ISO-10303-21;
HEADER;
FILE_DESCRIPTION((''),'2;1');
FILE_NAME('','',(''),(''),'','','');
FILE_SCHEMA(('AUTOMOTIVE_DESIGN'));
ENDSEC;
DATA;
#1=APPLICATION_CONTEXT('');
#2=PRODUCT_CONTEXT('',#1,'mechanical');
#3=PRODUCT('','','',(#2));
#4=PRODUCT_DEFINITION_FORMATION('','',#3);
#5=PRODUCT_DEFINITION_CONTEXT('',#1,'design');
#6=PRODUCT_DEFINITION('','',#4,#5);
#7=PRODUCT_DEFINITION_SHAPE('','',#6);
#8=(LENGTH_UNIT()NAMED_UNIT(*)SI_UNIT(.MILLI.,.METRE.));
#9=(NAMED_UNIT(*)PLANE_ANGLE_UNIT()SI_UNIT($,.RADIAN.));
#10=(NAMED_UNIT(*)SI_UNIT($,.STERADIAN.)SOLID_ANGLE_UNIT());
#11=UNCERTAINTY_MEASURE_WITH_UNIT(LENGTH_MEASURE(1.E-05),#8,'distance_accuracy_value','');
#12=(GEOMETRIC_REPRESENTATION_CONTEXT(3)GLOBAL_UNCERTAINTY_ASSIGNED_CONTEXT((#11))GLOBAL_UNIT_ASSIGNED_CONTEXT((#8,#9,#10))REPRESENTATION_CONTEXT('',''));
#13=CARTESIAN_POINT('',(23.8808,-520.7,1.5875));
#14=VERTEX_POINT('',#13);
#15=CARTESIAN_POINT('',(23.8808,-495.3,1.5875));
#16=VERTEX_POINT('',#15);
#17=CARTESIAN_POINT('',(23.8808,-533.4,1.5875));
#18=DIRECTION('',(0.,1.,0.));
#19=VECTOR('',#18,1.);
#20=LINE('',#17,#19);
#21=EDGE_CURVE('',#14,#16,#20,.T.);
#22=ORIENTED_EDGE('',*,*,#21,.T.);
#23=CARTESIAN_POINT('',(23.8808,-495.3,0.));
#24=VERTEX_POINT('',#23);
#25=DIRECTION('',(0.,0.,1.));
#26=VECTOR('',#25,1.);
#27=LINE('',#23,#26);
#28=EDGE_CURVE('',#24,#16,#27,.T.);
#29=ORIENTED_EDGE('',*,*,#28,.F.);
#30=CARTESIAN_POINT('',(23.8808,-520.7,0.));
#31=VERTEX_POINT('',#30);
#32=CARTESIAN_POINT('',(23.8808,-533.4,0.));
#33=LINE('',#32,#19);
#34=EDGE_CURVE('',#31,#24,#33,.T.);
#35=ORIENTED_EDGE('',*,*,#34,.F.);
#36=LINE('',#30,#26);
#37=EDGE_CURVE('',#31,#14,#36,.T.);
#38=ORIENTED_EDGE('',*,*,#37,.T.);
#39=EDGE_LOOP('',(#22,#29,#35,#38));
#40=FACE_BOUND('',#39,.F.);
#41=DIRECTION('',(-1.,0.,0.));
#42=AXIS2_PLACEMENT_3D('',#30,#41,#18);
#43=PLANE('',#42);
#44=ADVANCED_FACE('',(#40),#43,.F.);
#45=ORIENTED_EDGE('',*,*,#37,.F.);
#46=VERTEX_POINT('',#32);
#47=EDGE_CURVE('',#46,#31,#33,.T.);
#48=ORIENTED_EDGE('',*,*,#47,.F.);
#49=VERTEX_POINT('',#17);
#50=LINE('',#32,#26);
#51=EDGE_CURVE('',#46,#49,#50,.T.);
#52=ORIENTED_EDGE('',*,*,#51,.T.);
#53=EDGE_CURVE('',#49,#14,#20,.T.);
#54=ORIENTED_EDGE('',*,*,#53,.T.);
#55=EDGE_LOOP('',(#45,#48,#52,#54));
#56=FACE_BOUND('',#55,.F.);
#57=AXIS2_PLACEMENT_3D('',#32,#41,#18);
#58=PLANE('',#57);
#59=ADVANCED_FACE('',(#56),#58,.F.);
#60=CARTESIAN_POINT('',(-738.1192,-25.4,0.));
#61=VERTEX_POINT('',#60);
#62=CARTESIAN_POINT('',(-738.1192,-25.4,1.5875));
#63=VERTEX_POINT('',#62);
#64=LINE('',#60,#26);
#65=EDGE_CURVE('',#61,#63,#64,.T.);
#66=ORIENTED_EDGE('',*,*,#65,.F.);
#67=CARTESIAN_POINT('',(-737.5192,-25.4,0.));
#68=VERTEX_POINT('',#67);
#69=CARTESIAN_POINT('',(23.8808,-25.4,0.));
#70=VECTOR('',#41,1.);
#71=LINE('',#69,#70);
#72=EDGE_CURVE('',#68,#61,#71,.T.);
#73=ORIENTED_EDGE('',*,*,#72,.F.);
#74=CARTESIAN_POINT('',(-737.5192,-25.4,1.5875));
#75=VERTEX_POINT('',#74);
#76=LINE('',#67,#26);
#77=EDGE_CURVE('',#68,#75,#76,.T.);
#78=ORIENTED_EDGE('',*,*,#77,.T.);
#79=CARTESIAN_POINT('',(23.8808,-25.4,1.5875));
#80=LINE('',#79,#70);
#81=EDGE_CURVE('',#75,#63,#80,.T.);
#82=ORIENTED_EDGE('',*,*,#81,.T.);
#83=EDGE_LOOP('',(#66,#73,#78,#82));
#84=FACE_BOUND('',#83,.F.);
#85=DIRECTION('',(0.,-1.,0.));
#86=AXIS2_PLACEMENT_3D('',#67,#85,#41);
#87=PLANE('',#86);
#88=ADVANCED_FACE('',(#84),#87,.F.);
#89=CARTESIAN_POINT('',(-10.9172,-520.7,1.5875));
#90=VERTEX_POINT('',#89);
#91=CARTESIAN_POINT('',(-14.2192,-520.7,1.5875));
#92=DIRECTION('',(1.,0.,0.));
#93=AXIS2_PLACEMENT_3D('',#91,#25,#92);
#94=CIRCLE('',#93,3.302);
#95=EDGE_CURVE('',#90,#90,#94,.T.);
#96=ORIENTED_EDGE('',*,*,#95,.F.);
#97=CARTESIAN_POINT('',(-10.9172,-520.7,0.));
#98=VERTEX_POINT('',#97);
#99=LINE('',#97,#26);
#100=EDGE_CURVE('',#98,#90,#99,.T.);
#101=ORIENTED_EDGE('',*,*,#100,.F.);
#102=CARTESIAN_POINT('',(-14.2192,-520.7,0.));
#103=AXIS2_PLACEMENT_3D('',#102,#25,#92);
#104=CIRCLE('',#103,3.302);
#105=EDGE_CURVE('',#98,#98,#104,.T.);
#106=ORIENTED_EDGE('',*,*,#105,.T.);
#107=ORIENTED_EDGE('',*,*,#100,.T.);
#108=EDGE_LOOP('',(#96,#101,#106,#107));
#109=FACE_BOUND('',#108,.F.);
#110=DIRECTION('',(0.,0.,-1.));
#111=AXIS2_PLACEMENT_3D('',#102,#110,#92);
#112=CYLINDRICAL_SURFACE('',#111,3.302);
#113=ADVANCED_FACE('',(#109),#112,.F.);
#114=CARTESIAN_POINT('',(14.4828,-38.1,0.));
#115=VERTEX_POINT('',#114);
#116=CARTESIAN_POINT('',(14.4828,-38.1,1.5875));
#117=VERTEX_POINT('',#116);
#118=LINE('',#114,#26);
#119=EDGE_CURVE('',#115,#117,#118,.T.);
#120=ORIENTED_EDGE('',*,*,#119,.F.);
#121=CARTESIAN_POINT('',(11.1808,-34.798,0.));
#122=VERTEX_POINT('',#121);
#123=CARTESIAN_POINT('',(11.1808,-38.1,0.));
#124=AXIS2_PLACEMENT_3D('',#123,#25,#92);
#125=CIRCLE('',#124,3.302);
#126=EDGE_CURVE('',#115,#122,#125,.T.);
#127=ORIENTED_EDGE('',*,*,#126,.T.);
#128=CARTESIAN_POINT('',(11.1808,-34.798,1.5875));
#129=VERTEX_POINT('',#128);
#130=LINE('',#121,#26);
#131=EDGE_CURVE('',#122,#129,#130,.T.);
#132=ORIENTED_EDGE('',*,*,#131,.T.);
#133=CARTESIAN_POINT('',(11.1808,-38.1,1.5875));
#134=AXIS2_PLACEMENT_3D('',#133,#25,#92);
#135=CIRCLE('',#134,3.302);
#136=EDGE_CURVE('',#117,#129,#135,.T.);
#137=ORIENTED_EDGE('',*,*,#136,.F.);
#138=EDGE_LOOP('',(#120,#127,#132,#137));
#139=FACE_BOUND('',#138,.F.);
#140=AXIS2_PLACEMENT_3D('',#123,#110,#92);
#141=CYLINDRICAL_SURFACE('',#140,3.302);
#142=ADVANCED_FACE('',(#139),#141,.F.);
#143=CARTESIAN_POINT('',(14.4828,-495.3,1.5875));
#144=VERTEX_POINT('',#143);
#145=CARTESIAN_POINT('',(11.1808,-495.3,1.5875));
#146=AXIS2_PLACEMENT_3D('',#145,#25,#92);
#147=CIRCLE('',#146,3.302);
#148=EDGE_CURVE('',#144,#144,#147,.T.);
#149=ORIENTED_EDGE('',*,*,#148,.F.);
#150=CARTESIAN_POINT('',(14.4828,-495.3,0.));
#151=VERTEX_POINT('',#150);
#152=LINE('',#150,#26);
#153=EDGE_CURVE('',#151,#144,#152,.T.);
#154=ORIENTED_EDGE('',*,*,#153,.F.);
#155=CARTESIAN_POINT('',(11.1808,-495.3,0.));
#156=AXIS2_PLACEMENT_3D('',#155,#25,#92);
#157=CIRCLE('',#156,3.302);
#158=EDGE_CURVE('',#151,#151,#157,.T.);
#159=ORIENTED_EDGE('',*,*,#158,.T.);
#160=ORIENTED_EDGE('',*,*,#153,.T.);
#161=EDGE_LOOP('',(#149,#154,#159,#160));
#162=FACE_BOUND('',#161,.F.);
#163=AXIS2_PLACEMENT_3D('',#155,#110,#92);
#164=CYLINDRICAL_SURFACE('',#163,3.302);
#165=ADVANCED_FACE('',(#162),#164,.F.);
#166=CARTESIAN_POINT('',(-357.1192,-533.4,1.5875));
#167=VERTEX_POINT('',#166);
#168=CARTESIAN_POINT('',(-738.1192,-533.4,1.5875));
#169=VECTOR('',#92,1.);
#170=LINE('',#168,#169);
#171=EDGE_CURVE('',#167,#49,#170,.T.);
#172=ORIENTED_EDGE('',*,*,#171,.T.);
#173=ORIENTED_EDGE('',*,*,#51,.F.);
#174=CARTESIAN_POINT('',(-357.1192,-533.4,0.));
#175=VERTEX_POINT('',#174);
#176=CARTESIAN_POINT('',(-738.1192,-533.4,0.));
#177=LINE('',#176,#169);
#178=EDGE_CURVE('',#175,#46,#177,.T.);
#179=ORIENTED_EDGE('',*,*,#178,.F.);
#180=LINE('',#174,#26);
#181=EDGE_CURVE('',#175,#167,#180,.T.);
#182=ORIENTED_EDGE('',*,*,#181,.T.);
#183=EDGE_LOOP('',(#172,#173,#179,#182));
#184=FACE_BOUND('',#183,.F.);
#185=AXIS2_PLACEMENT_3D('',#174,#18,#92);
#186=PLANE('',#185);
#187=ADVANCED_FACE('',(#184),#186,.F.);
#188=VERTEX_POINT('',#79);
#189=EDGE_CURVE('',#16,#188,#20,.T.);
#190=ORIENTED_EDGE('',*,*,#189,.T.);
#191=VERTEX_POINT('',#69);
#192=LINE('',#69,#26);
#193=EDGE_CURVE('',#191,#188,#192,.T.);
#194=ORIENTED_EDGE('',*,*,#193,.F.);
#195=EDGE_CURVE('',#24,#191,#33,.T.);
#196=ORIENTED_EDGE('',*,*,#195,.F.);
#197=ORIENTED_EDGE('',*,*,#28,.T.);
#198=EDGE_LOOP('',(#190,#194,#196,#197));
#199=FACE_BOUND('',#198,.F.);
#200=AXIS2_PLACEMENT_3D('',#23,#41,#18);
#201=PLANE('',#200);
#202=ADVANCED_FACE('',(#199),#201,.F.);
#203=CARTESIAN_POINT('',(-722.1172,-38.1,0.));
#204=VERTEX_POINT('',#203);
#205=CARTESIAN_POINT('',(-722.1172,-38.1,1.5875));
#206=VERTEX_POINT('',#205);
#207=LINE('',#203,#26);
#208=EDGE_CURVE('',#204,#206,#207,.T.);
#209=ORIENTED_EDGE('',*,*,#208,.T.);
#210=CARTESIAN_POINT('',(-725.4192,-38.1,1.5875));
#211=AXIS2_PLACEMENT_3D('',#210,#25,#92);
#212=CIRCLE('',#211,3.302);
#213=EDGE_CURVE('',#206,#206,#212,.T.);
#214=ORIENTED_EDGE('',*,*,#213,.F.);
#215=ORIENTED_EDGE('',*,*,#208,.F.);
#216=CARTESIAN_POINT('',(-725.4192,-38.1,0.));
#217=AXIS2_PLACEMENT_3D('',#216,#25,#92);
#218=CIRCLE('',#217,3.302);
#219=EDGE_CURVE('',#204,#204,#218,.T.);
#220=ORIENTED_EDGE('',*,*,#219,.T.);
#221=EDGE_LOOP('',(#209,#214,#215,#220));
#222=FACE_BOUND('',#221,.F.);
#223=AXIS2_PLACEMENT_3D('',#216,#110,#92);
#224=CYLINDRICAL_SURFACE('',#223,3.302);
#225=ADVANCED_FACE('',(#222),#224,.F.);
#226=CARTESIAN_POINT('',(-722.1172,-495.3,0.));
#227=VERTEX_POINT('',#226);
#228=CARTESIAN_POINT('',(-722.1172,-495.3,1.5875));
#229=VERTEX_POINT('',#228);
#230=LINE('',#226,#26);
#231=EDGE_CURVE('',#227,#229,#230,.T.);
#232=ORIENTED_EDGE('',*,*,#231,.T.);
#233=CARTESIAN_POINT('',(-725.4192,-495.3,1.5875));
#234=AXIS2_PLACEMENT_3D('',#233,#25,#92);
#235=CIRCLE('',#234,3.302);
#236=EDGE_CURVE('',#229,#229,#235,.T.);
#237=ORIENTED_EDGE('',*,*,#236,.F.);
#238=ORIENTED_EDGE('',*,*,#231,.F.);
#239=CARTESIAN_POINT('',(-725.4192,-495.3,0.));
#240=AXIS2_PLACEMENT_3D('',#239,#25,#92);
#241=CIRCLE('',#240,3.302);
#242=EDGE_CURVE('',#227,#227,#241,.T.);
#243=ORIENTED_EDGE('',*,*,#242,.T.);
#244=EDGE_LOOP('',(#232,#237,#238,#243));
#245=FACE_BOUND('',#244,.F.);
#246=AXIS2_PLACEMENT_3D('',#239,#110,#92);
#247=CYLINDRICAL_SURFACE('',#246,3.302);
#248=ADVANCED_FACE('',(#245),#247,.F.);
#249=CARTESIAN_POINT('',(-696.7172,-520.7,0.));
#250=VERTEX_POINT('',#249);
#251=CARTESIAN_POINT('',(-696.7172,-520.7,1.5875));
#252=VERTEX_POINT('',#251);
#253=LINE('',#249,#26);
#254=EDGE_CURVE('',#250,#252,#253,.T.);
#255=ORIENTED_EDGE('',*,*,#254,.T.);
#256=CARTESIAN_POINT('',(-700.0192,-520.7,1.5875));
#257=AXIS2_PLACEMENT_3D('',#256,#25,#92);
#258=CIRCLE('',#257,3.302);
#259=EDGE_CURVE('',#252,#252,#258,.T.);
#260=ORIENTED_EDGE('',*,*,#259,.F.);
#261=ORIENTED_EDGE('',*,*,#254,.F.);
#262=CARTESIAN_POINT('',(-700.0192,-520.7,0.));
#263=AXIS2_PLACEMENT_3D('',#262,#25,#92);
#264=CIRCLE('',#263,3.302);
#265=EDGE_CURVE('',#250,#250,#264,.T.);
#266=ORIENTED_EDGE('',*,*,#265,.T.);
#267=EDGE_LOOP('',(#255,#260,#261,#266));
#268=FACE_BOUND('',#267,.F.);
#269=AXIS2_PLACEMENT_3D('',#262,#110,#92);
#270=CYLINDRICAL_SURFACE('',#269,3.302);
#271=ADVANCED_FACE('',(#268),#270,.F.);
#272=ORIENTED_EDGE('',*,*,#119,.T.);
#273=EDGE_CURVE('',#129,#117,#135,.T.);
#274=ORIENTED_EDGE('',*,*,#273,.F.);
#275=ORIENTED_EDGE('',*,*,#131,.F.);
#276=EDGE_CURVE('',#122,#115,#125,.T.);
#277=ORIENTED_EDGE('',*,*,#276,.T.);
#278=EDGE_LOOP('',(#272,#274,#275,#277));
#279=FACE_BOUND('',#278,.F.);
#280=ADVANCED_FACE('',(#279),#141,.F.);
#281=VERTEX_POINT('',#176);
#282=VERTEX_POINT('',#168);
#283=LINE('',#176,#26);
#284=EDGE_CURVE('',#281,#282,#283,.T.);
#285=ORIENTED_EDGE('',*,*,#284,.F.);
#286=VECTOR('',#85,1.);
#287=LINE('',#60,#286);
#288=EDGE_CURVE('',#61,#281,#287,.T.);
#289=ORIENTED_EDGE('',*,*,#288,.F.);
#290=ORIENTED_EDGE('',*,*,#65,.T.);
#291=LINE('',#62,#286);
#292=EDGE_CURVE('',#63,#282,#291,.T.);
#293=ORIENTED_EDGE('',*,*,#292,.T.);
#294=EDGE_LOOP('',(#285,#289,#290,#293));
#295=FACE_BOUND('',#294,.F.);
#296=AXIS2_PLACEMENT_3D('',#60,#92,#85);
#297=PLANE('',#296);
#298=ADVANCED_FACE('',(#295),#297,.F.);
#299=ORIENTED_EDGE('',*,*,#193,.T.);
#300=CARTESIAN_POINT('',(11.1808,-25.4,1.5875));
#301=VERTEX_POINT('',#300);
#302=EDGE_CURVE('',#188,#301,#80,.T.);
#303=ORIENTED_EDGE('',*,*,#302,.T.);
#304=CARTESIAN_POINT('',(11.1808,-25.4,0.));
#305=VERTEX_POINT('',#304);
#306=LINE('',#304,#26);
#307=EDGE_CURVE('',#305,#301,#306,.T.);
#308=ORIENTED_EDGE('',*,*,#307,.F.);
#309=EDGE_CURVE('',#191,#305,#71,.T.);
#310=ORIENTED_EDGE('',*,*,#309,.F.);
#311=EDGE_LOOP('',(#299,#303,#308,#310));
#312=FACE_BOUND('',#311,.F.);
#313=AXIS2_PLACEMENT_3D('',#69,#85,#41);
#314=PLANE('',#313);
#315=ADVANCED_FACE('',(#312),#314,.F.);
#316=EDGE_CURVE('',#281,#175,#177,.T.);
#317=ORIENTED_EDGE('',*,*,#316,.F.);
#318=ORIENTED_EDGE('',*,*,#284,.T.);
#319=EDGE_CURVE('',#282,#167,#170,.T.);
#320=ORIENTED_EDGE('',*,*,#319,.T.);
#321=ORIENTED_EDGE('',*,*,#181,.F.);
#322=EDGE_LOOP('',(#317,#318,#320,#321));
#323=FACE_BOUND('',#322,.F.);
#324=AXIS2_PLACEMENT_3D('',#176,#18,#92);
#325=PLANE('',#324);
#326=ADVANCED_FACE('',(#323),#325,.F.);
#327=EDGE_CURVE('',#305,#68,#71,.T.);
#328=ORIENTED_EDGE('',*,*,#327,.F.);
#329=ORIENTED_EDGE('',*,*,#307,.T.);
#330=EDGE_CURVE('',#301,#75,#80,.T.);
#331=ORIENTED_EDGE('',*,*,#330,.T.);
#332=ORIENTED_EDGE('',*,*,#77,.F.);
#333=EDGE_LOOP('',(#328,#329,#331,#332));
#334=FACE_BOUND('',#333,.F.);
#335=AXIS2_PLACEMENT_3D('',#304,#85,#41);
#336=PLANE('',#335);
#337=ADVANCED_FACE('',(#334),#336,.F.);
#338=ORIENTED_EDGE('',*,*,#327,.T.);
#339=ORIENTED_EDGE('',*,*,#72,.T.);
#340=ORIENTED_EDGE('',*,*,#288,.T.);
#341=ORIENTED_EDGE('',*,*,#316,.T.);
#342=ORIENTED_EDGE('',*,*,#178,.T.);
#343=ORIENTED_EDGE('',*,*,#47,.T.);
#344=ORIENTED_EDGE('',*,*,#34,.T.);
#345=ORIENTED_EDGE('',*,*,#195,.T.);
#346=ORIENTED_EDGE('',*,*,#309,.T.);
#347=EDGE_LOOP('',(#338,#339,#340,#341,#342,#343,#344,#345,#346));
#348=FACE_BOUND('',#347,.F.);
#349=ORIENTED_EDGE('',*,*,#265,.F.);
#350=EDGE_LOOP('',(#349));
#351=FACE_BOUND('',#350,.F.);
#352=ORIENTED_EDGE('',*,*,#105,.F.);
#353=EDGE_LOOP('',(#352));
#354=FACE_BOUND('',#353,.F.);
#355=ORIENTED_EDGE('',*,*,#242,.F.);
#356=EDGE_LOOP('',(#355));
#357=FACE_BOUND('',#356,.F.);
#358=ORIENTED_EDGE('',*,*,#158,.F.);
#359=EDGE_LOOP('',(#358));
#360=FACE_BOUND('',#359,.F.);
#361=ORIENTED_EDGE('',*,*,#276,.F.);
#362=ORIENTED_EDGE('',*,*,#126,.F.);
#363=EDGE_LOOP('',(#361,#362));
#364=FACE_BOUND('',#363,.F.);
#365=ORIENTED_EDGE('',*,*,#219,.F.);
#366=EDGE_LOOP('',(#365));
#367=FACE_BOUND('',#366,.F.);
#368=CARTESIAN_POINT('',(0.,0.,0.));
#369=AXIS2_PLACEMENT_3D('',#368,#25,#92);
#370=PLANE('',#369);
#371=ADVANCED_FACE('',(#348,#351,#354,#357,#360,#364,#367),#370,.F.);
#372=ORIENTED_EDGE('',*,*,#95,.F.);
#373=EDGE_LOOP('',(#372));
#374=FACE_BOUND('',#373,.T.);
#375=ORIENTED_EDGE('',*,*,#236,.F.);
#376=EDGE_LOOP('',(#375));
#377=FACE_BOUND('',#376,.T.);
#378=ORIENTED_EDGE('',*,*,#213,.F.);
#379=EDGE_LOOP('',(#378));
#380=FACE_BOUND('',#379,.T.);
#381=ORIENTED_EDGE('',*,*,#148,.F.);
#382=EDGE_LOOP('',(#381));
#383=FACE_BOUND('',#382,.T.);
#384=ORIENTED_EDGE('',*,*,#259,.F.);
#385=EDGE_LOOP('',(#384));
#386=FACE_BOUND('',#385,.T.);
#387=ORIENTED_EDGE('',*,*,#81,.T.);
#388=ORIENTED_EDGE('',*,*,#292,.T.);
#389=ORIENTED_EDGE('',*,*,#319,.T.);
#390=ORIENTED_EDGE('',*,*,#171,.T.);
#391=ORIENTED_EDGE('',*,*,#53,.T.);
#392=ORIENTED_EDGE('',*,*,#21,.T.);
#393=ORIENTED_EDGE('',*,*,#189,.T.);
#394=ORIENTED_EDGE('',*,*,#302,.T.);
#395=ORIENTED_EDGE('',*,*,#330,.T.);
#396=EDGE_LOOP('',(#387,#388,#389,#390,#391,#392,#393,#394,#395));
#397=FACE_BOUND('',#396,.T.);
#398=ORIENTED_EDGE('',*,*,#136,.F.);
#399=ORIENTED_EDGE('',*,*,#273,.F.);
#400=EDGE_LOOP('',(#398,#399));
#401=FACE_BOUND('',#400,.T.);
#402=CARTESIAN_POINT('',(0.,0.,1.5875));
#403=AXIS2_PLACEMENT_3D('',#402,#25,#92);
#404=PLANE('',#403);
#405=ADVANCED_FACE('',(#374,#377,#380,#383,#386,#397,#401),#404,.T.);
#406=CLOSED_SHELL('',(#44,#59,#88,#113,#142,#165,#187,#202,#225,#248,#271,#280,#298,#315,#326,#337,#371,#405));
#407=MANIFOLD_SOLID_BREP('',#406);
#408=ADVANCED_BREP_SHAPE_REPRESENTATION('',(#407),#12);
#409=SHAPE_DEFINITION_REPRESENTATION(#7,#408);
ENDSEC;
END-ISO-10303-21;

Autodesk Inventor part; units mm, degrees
ref_plane "YZ Plane" through (0, 0, 0) normal (1, 0, 0) x (0, 1, 0)
ref_plane "XZ Plane" through (0, 0, 0) normal (0, 1, 0) x (-1, 0, 0)
ref_plane "XY Plane" through (0, 0, 0) normal (0, 0, 1) x (1, 0, 0)
ref_plane "Work Plane1" through (0, 0, 0) normal (0, 0, 1) x (1, 0, 0)
sketch "Sketch1" plane through (0, 0, 0) normal (0, 0, 1) x (1, 0, 0)
  line L0 (23.8808, -12.7) -> (23.8808, -25.4) projected
  line L1 (21.1808, -12.7) -> (23.8808, -12.7) projected
  line L2 (-728.3704, -532.9745) -> (-736.6, -532.9745) projected
  line L3 (-737.616, -531.9585) -> (-737.616, -523.7289) projected
  line L4 (-737.5192, -12.7) -> (-737.5192, -25.4) projected
  line L5 (-712.1334, -532.9746) -> (-0.9334, -532.9746) projected
  line L6 (23.8808, -25.4) -> (-738.1192, -25.4)
  line L7 (-738.1192, -25.4) -> (-738.1192, -533.4)
  line L8 (-738.1192, -533.4) -> (23.8808, -533.4)
  line L9 (23.8808, -533.4) -> (23.8808, -25.4)
  line L10 (23.8808, -25.4) -> (11.1808, -25.4)
  line L11 (11.1808, -25.4) -> (11.1808, -38.1)
  circle A0 centre (11.1808, -38.1) radius 3.302
  line L12 (23.8808, -533.4) -> (23.8808, -495.3)
  line L13 (23.8808, -495.3) -> (11.1808, -495.3)
  circle A1 centre (11.1808, -495.3) radius 3.302
  line L14 (23.8808, -533.4) -> (23.8808, -520.7)
  line L15 (23.8808, -520.7) -> (-14.2192, -520.7)
  circle A2 centre (-14.2192, -520.7) radius 3.302
  line L16 (23.8808, -533.4) -> (-357.1192, -533.4)
  line L17 (23.8808, -533.4) -> (404.8808, -533.4) construction
  line L18 (-357.1192, -533.4) -> (-357.1192, -428.4969)
  line L19 (-357.1192, -533.4) -> (-252.2161, -533.4) construction
  circle A3 centre (-725.4192, -38.1) radius 3.302
  circle A4 centre (-725.4192, -495.3) radius 3.302
  circle A5 centre (-700.0192, -520.7) radius 3.302
  point P0 (0, 0)
  dimension "d0" = 762
  dimension "d1" = 508
  dimension "d4" = 12.7
  dimension "d5" = 12.7
  dimension "d6" = 6.604
  dimension "d7" = 38.1
  dimension "d8" = 12.7
  dimension "d9" = 6.604
  dimension "d10" = 12.7
  dimension "d11" = 38.1
  dimension "d12" = 6.604
  dimension "d13" = 381
  dimension "d14" = 180
  dimension "d15" = 90
extrude "Extrusion2" add sketch "Sketch1" along normal blind 1.5875
properties part number "vrRig_enclosure_sidePanel"
